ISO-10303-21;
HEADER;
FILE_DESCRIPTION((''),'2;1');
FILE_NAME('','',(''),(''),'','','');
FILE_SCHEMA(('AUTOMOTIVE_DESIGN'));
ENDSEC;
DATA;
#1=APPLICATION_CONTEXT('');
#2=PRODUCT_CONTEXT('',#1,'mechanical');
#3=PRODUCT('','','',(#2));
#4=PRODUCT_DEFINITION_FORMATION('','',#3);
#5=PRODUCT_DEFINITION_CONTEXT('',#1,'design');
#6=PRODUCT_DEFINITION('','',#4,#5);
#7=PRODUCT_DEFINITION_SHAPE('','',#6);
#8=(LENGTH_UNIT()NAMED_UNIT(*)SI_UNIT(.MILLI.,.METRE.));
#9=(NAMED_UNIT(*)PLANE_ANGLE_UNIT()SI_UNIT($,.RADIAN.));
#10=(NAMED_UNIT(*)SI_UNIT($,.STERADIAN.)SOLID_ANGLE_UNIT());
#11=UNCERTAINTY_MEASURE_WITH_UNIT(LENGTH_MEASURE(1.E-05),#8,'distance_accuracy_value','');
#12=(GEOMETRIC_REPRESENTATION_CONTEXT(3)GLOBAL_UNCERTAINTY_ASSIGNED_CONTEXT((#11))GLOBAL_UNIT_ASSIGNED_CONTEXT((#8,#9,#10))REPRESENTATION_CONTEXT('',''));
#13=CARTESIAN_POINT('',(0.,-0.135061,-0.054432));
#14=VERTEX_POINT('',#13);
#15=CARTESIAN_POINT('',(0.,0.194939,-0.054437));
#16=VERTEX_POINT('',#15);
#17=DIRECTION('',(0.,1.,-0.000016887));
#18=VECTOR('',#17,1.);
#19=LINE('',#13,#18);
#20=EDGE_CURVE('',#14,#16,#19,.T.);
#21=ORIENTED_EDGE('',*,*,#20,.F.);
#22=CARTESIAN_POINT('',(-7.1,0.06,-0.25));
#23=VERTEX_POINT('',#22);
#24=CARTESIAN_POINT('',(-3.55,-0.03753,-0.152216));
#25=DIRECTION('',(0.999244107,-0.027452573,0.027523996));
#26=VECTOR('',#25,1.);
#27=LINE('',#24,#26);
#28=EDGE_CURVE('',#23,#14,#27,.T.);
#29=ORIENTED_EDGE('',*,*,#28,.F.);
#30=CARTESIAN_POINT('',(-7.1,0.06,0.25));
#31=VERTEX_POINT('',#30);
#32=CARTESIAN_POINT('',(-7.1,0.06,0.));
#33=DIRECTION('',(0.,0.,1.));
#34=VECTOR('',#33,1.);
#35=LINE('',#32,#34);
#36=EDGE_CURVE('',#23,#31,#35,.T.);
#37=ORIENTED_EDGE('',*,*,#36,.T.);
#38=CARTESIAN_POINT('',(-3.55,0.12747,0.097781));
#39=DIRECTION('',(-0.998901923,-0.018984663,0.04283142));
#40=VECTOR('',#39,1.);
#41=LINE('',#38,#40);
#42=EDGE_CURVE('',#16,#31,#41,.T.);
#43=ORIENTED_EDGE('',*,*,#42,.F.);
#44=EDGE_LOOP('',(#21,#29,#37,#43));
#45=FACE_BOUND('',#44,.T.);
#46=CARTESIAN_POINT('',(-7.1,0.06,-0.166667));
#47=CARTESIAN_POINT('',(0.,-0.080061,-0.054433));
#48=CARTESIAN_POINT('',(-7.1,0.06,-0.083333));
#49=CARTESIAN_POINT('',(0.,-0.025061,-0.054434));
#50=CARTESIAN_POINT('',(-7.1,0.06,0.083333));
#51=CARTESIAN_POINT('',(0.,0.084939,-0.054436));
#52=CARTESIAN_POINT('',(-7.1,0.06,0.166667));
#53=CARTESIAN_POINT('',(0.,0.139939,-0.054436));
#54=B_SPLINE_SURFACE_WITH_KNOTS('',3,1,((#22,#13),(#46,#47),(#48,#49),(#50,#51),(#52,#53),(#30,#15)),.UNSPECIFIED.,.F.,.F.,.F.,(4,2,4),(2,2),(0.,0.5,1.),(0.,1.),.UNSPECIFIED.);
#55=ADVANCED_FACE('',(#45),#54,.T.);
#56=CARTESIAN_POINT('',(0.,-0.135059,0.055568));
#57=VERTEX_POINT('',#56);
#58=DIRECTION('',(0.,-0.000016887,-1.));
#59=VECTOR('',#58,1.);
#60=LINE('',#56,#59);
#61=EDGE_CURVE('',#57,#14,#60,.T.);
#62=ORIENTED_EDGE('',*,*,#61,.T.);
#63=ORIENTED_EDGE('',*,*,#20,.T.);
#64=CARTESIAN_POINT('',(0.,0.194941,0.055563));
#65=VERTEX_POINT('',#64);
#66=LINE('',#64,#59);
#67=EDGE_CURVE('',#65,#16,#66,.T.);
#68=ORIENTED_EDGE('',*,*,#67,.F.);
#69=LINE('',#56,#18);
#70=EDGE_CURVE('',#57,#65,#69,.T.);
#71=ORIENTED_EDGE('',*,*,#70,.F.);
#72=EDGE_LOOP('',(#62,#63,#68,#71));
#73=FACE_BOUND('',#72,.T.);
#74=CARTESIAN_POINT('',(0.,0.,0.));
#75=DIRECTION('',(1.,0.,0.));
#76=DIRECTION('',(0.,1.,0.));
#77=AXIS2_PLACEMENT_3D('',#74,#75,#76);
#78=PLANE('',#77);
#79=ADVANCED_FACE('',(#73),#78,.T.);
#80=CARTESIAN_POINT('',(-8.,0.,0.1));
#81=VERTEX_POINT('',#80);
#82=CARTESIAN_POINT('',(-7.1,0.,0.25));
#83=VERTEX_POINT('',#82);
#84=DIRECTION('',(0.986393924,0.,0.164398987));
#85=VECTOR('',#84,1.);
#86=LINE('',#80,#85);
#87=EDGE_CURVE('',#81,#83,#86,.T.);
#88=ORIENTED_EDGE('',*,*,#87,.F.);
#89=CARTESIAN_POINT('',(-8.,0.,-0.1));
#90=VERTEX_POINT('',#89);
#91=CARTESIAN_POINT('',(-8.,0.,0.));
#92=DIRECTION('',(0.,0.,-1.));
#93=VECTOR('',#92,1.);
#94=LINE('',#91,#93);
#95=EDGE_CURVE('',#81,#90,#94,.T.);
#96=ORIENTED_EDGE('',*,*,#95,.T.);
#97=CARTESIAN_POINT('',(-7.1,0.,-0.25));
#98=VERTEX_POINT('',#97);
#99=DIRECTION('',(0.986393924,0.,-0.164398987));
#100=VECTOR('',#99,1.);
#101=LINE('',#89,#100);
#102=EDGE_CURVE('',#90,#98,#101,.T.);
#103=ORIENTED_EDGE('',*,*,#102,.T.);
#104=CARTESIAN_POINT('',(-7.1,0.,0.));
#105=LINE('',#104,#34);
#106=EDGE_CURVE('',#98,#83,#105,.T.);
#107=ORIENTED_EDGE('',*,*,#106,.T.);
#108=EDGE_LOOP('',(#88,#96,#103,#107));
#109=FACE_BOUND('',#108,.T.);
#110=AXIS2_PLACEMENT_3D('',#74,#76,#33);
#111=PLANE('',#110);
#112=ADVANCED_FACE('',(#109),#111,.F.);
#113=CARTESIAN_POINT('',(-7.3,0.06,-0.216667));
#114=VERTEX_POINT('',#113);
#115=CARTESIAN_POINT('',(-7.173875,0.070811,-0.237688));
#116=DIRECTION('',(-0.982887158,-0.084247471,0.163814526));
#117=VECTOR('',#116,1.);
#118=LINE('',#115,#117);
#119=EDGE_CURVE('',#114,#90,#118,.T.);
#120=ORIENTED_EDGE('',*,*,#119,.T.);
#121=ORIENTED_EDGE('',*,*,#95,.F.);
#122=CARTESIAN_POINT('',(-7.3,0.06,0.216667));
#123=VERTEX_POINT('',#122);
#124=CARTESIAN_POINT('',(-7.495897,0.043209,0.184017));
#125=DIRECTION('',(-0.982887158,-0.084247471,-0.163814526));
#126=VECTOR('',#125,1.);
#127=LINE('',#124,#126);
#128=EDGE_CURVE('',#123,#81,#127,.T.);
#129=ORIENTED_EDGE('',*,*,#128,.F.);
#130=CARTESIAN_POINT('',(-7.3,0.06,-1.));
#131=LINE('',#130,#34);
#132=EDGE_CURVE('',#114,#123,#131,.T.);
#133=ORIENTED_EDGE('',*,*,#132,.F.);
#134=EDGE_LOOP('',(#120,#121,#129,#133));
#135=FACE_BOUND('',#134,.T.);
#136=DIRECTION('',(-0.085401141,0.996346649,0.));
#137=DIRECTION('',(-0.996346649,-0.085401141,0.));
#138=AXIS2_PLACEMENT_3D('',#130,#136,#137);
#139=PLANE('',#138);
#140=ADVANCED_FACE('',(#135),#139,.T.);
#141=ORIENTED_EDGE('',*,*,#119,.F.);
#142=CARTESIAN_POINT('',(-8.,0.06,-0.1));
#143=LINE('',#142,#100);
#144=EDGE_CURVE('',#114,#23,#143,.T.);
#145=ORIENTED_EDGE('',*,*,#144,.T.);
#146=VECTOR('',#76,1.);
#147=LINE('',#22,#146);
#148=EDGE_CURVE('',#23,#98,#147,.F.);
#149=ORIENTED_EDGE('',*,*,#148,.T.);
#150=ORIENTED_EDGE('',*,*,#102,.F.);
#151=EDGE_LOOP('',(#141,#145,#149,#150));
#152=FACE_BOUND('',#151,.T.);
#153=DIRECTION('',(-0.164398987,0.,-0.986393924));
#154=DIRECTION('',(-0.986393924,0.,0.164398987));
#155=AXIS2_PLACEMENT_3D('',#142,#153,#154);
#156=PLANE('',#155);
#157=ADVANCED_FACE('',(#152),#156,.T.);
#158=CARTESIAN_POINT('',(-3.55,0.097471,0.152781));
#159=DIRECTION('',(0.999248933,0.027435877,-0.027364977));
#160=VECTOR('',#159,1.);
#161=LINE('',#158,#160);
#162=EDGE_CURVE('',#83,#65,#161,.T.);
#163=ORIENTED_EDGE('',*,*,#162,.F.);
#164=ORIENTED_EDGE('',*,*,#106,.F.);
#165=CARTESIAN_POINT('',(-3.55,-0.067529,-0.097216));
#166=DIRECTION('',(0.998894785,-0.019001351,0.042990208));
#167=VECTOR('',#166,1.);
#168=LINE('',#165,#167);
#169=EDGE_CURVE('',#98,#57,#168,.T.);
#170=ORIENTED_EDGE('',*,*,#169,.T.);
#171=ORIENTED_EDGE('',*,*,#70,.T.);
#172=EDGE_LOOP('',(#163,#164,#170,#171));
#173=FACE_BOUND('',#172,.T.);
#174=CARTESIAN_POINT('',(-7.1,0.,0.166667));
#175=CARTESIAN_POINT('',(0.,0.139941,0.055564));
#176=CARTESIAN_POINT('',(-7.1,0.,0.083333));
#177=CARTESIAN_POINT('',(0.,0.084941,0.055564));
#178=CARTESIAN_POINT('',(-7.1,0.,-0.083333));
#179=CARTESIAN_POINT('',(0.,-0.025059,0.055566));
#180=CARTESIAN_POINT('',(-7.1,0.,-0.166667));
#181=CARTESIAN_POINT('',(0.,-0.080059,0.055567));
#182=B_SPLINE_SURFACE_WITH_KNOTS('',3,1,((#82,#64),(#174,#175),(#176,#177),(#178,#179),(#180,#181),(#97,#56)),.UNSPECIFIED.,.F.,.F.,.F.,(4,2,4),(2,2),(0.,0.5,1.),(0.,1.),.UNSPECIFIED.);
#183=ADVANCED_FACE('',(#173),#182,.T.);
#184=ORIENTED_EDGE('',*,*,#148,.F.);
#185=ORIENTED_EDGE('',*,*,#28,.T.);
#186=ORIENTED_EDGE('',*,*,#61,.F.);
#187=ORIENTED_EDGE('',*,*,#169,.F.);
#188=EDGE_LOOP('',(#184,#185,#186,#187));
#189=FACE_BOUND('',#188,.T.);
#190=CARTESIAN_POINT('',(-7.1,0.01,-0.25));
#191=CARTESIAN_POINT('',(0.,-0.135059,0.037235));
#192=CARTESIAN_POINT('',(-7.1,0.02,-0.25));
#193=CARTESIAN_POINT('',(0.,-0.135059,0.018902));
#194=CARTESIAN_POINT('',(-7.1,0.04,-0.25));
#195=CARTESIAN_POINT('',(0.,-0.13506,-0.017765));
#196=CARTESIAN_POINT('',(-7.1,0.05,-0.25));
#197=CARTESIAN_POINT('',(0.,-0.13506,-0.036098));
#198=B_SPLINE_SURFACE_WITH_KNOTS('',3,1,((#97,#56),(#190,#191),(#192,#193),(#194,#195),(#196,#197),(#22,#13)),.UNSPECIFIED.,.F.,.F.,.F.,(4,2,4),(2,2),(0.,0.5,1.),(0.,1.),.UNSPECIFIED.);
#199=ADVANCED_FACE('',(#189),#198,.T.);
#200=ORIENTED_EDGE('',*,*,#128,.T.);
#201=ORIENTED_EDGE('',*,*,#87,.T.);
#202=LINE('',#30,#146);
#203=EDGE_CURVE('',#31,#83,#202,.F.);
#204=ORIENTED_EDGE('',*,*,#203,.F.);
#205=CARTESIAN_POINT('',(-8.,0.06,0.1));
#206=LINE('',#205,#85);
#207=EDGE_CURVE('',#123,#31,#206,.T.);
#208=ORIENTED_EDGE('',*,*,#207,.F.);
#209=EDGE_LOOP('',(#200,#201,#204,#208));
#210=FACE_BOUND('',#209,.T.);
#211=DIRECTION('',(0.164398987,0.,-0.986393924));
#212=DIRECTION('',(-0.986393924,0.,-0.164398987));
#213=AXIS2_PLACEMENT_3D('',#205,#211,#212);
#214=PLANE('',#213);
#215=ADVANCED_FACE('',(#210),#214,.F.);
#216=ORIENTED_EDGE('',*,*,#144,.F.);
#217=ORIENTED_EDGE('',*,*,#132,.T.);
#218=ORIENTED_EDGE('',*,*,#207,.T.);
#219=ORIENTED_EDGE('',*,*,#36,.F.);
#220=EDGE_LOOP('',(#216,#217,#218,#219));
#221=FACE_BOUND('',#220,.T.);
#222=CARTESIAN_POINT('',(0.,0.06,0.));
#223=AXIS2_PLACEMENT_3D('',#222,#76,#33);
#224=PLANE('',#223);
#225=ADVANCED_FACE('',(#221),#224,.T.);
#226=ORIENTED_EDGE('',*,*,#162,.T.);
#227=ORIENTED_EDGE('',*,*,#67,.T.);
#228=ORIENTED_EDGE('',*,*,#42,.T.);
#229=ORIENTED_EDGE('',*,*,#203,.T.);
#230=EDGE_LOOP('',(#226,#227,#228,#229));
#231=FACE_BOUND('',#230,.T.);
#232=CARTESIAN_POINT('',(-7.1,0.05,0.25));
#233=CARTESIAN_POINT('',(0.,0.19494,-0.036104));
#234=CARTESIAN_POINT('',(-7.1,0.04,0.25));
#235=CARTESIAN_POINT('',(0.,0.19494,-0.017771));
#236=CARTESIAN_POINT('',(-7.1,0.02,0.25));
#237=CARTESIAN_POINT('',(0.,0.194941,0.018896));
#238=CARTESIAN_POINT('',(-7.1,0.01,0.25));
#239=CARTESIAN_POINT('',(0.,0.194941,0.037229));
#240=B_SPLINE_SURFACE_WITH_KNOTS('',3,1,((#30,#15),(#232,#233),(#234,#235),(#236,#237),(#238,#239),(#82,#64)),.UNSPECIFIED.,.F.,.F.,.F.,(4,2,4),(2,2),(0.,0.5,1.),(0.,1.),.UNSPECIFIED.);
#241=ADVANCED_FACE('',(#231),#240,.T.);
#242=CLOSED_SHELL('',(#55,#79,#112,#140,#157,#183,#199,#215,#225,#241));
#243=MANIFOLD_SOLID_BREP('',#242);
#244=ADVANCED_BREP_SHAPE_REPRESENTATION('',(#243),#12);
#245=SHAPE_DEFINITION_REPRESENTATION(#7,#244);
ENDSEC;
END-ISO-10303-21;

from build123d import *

# Parameters (mm, degrees)
BOSS_EXTRUDE1_DEPTH = 0.06
CUT_EXTRUDE3_DEPTH  = 9.09728967
CUT_EXTRUDE4_DEPTH  = 9.09728967
CUT_EXTRUDE5_DEPTH  = 2.5
SKETCH7_W           = 7.1
SKETCH7_H           = 0.5
CUT_EXTRUDE6_DEPTH  = 2.5


with BuildPart() as part:
    # Sketch1 → Boss-Extrude1 (new body)
    with BuildSketch(Plane(origin=(0, 0, 0), x_dir=(1, 0, 0), z_dir=(0, 1, 0))):
        with BuildLine():
            ThreePointArc((-0.362264151, -0.932075472), (-0.747576714, -0.664175471), (-0.968245837, -0.25))
            Line((-0.968245837, -0.25), (-4, -0.25))
            Line((-4, -0.25), (-0.362264151, -0.932075472))
        make_face()
        with BuildLine():
            ThreePointArc((-0.968245837, 0.25), (-0.747576714, 0.664175471), (-0.362264151, 0.932075472))
            Line((-0.362264151, 0.932075472), (-4, 0.25))
            Line((-4, 0.25), (-0.968245837, 0.25))
        make_face()
        with BuildLine():
            ThreePointArc((-0.968245837, -0.25), (-1, 0), (-0.968245837, 0.25))
            Line((-0.968245837, 0.25), (-4, 0.25))
            Line((-4, 0.25), (-8, 0.25))
            Line((-8, 0.25), (-8, -0.25))
            Line((-8, -0.25), (-4, -0.25))
            Line((-4, -0.25), (-0.968245837, -0.25))
        make_face()
        with BuildLine():
            Line((0, -1), (0, -0.25))
            Line((0, -0.25), (-0.968245837, -0.25))
            ThreePointArc((-0.968245837, -0.25), (-0.747576714, -0.664175471), (-0.362264151, -0.932075472))
            Line((-0.362264151, -0.932075472), (0, -1))
        make_face()
        with BuildLine():
            Line((0, 0.25), (0, 1))
            Line((0, 1), (-0.362264151, 0.932075472))
            ThreePointArc((-0.362264151, 0.932075472), (-0.747576714, 0.664175471), (-0.968245837, 0.25))
            Line((-0.968245837, 0.25), (0, 0.25))
        make_face()
        with BuildLine():
            Line((0, -0.25), (0, 0.25))
            Line((0, 0.25), (-0.968245837, 0.25))
            ThreePointArc((-0.968245837, 0.25), (-1, 0), (-0.968245837, -0.25))
            Line((-0.968245837, -0.25), (0, -0.25))
        make_face()
    extrude(amount=BOSS_EXTRUDE1_DEPTH)

    # Sketch5 → Cut-Extrude3 (cut, through all)
    with BuildSketch(Plane.XY.offset(0.25)):
        Polygon((-8, 0), (-8, 0.06), (-7.3, 0.06), align=None)
    extrude(amount=-CUT_EXTRUDE3_DEPTH, mode=Mode.SUBTRACT)

    # 3DSketch1 → Cut-Extrude4 (cut, through all)
    with BuildSketch(Plane(origin=(-8, 0.06, 0.25), x_dir=(0.8741572761215382, 0, -0.48564293117863155), z_dir=(0, 1, 0))):
        Polygon((0, 0), (0.07284644, 0.131123591), (0.786741549, -0.437078638), align=None)
        Polygon((1.029563014, 0), (0.242821466, 0.437078638), (0.169975026, 0.305955047), align=None)
    extrude(amount=-CUT_EXTRUDE4_DEPTH, mode=Mode.SUBTRACT)

    # Sketch6 → Cut-Extrude5 (cut)
    with BuildSketch(Plane(origin=(0, 0.06, 0), x_dir=(1, 0, 0), z_dir=(0, 1, 0))):
        Polygon((0, 1), (-4, 0.25), (0, 0.25), align=None)
        Polygon((0, -0.25), (-4, -0.25), (0, -1), align=None)
    extrude(amount=-CUT_EXTRUDE5_DEPTH, mode=Mode.SUBTRACT)

    # Sketch7 → Cut-Extrude6 (cut)
    with BuildSketch(Plane(origin=(0, 0.06, 0), x_dir=(1, 0, 0), z_dir=(0, 1, 0))):
        with Locations((-3.55, 0)):
            Rectangle(SKETCH7_W, SKETCH7_H)
    extrude(amount=-CUT_EXTRUDE6_DEPTH, mode=Mode.SUBTRACT)

    # Loft1: read off the stored shape, not the designer's step
    # Loft1: loft between two sections, ruled curve by curve
    loft1_from = [
        Edge.make_bspline([(-7.1, 0.06, 0.25), (-7.1, 0.05, 0.25), (-7.1, 0.04, 0.25), (-7.1, 0.02, 0.25), (-7.1, 0.01, 0.25), (-7.1, 0, 0.25)], [0, 0, 0, 0, 0.5, 0.5, 1, 1, 1, 1], 3),
        Edge.make_bspline([(-7.1, 0, 0.25), (-7.1, 0, 0.166666667), (-7.1, 0, 0.083333333), (-7.1, 0, -0.083333333), (-7.1, 0, -0.166666667), (-7.1, 0, -0.25)], [0, 0, 0, 0, 0.5, 0.5, 1, 1, 1, 1], 3),
        Edge.make_bspline([(-7.1, 0.06, -0.25), (-7.1, 0.06, -0.166666667), (-7.1, 0.06, -0.083333333), (-7.1, 0.06, 0.083333333), (-7.1, 0.06, 0.166666667), (-7.1, 0.06, 0.25)], [0, 0, 0, 0, 0.5, 0.5, 1, 1, 1, 1], 3),
        Edge.make_bspline([(-7.1, 0, -0.25), (-7.1, 0.01, -0.25), (-7.1, 0.02, -0.25), (-7.1, 0.04, -0.25), (-7.1, 0.05, -0.25), (-7.1, 0.06, -0.25)], [0, 0, 0, 0, 0.5, 0.5, 1, 1, 1, 1], 3),
    ]
    loft1_to = [
        Edge.make_bspline([(0, 0.194939284, -0.054437375), (0, 0.194939593, -0.036104042), (0, 0.194939903, -0.017770708), (0, 0.194940522, 0.018895958), (0, 0.194940832, 0.037229292), (0, 0.194941141, 0.055562625)], [0, 0, 0, 0, 0.5, 0.5, 1, 1, 1, 1], 3),
        Edge.make_bspline([(0, 0.194941141, 0.055562625), (0, 0.139941141, 0.055563554), (0, 0.084941141, 0.055564483), (0, -0.025058859, 0.05556634), (0, -0.080058859, 0.055567269), (0, -0.135058859, 0.055568198)], [0, 0, 0, 0, 0.5, 0.5, 1, 1, 1, 1], 3),
        Edge.make_bspline([(0, -0.135060716, -0.054431802), (0, -0.080060716, -0.054432731), (0, -0.025060716, -0.05443366), (0, 0.084939284, -0.054435517), (0, 0.139939284, -0.054436446), (0, 0.194939284, -0.054437375)], [0, 0, 0, 0, 0.5, 0.5, 1, 1, 1, 1], 3),
        Edge.make_bspline([(0, -0.135058859, 0.055568198), (0, -0.135059168, 0.037234864), (0, -0.135059478, 0.018901531), (0, -0.135060097, -0.017765136), (0, -0.135060407, -0.036098469), (0, -0.135060716, -0.054431802)], [0, 0, 0, 0, 0.5, 0.5, 1, 1, 1, 1], 3),
    ]
    loft1 = Solid(Shell([*[Face.make_surface_from_curves(loft1_from[k], loft1_to[k]) for k in range(4)], Face(Wire(loft1_from)), Face(Wire(loft1_to))]))
    add(loft1)


solid = part.part
